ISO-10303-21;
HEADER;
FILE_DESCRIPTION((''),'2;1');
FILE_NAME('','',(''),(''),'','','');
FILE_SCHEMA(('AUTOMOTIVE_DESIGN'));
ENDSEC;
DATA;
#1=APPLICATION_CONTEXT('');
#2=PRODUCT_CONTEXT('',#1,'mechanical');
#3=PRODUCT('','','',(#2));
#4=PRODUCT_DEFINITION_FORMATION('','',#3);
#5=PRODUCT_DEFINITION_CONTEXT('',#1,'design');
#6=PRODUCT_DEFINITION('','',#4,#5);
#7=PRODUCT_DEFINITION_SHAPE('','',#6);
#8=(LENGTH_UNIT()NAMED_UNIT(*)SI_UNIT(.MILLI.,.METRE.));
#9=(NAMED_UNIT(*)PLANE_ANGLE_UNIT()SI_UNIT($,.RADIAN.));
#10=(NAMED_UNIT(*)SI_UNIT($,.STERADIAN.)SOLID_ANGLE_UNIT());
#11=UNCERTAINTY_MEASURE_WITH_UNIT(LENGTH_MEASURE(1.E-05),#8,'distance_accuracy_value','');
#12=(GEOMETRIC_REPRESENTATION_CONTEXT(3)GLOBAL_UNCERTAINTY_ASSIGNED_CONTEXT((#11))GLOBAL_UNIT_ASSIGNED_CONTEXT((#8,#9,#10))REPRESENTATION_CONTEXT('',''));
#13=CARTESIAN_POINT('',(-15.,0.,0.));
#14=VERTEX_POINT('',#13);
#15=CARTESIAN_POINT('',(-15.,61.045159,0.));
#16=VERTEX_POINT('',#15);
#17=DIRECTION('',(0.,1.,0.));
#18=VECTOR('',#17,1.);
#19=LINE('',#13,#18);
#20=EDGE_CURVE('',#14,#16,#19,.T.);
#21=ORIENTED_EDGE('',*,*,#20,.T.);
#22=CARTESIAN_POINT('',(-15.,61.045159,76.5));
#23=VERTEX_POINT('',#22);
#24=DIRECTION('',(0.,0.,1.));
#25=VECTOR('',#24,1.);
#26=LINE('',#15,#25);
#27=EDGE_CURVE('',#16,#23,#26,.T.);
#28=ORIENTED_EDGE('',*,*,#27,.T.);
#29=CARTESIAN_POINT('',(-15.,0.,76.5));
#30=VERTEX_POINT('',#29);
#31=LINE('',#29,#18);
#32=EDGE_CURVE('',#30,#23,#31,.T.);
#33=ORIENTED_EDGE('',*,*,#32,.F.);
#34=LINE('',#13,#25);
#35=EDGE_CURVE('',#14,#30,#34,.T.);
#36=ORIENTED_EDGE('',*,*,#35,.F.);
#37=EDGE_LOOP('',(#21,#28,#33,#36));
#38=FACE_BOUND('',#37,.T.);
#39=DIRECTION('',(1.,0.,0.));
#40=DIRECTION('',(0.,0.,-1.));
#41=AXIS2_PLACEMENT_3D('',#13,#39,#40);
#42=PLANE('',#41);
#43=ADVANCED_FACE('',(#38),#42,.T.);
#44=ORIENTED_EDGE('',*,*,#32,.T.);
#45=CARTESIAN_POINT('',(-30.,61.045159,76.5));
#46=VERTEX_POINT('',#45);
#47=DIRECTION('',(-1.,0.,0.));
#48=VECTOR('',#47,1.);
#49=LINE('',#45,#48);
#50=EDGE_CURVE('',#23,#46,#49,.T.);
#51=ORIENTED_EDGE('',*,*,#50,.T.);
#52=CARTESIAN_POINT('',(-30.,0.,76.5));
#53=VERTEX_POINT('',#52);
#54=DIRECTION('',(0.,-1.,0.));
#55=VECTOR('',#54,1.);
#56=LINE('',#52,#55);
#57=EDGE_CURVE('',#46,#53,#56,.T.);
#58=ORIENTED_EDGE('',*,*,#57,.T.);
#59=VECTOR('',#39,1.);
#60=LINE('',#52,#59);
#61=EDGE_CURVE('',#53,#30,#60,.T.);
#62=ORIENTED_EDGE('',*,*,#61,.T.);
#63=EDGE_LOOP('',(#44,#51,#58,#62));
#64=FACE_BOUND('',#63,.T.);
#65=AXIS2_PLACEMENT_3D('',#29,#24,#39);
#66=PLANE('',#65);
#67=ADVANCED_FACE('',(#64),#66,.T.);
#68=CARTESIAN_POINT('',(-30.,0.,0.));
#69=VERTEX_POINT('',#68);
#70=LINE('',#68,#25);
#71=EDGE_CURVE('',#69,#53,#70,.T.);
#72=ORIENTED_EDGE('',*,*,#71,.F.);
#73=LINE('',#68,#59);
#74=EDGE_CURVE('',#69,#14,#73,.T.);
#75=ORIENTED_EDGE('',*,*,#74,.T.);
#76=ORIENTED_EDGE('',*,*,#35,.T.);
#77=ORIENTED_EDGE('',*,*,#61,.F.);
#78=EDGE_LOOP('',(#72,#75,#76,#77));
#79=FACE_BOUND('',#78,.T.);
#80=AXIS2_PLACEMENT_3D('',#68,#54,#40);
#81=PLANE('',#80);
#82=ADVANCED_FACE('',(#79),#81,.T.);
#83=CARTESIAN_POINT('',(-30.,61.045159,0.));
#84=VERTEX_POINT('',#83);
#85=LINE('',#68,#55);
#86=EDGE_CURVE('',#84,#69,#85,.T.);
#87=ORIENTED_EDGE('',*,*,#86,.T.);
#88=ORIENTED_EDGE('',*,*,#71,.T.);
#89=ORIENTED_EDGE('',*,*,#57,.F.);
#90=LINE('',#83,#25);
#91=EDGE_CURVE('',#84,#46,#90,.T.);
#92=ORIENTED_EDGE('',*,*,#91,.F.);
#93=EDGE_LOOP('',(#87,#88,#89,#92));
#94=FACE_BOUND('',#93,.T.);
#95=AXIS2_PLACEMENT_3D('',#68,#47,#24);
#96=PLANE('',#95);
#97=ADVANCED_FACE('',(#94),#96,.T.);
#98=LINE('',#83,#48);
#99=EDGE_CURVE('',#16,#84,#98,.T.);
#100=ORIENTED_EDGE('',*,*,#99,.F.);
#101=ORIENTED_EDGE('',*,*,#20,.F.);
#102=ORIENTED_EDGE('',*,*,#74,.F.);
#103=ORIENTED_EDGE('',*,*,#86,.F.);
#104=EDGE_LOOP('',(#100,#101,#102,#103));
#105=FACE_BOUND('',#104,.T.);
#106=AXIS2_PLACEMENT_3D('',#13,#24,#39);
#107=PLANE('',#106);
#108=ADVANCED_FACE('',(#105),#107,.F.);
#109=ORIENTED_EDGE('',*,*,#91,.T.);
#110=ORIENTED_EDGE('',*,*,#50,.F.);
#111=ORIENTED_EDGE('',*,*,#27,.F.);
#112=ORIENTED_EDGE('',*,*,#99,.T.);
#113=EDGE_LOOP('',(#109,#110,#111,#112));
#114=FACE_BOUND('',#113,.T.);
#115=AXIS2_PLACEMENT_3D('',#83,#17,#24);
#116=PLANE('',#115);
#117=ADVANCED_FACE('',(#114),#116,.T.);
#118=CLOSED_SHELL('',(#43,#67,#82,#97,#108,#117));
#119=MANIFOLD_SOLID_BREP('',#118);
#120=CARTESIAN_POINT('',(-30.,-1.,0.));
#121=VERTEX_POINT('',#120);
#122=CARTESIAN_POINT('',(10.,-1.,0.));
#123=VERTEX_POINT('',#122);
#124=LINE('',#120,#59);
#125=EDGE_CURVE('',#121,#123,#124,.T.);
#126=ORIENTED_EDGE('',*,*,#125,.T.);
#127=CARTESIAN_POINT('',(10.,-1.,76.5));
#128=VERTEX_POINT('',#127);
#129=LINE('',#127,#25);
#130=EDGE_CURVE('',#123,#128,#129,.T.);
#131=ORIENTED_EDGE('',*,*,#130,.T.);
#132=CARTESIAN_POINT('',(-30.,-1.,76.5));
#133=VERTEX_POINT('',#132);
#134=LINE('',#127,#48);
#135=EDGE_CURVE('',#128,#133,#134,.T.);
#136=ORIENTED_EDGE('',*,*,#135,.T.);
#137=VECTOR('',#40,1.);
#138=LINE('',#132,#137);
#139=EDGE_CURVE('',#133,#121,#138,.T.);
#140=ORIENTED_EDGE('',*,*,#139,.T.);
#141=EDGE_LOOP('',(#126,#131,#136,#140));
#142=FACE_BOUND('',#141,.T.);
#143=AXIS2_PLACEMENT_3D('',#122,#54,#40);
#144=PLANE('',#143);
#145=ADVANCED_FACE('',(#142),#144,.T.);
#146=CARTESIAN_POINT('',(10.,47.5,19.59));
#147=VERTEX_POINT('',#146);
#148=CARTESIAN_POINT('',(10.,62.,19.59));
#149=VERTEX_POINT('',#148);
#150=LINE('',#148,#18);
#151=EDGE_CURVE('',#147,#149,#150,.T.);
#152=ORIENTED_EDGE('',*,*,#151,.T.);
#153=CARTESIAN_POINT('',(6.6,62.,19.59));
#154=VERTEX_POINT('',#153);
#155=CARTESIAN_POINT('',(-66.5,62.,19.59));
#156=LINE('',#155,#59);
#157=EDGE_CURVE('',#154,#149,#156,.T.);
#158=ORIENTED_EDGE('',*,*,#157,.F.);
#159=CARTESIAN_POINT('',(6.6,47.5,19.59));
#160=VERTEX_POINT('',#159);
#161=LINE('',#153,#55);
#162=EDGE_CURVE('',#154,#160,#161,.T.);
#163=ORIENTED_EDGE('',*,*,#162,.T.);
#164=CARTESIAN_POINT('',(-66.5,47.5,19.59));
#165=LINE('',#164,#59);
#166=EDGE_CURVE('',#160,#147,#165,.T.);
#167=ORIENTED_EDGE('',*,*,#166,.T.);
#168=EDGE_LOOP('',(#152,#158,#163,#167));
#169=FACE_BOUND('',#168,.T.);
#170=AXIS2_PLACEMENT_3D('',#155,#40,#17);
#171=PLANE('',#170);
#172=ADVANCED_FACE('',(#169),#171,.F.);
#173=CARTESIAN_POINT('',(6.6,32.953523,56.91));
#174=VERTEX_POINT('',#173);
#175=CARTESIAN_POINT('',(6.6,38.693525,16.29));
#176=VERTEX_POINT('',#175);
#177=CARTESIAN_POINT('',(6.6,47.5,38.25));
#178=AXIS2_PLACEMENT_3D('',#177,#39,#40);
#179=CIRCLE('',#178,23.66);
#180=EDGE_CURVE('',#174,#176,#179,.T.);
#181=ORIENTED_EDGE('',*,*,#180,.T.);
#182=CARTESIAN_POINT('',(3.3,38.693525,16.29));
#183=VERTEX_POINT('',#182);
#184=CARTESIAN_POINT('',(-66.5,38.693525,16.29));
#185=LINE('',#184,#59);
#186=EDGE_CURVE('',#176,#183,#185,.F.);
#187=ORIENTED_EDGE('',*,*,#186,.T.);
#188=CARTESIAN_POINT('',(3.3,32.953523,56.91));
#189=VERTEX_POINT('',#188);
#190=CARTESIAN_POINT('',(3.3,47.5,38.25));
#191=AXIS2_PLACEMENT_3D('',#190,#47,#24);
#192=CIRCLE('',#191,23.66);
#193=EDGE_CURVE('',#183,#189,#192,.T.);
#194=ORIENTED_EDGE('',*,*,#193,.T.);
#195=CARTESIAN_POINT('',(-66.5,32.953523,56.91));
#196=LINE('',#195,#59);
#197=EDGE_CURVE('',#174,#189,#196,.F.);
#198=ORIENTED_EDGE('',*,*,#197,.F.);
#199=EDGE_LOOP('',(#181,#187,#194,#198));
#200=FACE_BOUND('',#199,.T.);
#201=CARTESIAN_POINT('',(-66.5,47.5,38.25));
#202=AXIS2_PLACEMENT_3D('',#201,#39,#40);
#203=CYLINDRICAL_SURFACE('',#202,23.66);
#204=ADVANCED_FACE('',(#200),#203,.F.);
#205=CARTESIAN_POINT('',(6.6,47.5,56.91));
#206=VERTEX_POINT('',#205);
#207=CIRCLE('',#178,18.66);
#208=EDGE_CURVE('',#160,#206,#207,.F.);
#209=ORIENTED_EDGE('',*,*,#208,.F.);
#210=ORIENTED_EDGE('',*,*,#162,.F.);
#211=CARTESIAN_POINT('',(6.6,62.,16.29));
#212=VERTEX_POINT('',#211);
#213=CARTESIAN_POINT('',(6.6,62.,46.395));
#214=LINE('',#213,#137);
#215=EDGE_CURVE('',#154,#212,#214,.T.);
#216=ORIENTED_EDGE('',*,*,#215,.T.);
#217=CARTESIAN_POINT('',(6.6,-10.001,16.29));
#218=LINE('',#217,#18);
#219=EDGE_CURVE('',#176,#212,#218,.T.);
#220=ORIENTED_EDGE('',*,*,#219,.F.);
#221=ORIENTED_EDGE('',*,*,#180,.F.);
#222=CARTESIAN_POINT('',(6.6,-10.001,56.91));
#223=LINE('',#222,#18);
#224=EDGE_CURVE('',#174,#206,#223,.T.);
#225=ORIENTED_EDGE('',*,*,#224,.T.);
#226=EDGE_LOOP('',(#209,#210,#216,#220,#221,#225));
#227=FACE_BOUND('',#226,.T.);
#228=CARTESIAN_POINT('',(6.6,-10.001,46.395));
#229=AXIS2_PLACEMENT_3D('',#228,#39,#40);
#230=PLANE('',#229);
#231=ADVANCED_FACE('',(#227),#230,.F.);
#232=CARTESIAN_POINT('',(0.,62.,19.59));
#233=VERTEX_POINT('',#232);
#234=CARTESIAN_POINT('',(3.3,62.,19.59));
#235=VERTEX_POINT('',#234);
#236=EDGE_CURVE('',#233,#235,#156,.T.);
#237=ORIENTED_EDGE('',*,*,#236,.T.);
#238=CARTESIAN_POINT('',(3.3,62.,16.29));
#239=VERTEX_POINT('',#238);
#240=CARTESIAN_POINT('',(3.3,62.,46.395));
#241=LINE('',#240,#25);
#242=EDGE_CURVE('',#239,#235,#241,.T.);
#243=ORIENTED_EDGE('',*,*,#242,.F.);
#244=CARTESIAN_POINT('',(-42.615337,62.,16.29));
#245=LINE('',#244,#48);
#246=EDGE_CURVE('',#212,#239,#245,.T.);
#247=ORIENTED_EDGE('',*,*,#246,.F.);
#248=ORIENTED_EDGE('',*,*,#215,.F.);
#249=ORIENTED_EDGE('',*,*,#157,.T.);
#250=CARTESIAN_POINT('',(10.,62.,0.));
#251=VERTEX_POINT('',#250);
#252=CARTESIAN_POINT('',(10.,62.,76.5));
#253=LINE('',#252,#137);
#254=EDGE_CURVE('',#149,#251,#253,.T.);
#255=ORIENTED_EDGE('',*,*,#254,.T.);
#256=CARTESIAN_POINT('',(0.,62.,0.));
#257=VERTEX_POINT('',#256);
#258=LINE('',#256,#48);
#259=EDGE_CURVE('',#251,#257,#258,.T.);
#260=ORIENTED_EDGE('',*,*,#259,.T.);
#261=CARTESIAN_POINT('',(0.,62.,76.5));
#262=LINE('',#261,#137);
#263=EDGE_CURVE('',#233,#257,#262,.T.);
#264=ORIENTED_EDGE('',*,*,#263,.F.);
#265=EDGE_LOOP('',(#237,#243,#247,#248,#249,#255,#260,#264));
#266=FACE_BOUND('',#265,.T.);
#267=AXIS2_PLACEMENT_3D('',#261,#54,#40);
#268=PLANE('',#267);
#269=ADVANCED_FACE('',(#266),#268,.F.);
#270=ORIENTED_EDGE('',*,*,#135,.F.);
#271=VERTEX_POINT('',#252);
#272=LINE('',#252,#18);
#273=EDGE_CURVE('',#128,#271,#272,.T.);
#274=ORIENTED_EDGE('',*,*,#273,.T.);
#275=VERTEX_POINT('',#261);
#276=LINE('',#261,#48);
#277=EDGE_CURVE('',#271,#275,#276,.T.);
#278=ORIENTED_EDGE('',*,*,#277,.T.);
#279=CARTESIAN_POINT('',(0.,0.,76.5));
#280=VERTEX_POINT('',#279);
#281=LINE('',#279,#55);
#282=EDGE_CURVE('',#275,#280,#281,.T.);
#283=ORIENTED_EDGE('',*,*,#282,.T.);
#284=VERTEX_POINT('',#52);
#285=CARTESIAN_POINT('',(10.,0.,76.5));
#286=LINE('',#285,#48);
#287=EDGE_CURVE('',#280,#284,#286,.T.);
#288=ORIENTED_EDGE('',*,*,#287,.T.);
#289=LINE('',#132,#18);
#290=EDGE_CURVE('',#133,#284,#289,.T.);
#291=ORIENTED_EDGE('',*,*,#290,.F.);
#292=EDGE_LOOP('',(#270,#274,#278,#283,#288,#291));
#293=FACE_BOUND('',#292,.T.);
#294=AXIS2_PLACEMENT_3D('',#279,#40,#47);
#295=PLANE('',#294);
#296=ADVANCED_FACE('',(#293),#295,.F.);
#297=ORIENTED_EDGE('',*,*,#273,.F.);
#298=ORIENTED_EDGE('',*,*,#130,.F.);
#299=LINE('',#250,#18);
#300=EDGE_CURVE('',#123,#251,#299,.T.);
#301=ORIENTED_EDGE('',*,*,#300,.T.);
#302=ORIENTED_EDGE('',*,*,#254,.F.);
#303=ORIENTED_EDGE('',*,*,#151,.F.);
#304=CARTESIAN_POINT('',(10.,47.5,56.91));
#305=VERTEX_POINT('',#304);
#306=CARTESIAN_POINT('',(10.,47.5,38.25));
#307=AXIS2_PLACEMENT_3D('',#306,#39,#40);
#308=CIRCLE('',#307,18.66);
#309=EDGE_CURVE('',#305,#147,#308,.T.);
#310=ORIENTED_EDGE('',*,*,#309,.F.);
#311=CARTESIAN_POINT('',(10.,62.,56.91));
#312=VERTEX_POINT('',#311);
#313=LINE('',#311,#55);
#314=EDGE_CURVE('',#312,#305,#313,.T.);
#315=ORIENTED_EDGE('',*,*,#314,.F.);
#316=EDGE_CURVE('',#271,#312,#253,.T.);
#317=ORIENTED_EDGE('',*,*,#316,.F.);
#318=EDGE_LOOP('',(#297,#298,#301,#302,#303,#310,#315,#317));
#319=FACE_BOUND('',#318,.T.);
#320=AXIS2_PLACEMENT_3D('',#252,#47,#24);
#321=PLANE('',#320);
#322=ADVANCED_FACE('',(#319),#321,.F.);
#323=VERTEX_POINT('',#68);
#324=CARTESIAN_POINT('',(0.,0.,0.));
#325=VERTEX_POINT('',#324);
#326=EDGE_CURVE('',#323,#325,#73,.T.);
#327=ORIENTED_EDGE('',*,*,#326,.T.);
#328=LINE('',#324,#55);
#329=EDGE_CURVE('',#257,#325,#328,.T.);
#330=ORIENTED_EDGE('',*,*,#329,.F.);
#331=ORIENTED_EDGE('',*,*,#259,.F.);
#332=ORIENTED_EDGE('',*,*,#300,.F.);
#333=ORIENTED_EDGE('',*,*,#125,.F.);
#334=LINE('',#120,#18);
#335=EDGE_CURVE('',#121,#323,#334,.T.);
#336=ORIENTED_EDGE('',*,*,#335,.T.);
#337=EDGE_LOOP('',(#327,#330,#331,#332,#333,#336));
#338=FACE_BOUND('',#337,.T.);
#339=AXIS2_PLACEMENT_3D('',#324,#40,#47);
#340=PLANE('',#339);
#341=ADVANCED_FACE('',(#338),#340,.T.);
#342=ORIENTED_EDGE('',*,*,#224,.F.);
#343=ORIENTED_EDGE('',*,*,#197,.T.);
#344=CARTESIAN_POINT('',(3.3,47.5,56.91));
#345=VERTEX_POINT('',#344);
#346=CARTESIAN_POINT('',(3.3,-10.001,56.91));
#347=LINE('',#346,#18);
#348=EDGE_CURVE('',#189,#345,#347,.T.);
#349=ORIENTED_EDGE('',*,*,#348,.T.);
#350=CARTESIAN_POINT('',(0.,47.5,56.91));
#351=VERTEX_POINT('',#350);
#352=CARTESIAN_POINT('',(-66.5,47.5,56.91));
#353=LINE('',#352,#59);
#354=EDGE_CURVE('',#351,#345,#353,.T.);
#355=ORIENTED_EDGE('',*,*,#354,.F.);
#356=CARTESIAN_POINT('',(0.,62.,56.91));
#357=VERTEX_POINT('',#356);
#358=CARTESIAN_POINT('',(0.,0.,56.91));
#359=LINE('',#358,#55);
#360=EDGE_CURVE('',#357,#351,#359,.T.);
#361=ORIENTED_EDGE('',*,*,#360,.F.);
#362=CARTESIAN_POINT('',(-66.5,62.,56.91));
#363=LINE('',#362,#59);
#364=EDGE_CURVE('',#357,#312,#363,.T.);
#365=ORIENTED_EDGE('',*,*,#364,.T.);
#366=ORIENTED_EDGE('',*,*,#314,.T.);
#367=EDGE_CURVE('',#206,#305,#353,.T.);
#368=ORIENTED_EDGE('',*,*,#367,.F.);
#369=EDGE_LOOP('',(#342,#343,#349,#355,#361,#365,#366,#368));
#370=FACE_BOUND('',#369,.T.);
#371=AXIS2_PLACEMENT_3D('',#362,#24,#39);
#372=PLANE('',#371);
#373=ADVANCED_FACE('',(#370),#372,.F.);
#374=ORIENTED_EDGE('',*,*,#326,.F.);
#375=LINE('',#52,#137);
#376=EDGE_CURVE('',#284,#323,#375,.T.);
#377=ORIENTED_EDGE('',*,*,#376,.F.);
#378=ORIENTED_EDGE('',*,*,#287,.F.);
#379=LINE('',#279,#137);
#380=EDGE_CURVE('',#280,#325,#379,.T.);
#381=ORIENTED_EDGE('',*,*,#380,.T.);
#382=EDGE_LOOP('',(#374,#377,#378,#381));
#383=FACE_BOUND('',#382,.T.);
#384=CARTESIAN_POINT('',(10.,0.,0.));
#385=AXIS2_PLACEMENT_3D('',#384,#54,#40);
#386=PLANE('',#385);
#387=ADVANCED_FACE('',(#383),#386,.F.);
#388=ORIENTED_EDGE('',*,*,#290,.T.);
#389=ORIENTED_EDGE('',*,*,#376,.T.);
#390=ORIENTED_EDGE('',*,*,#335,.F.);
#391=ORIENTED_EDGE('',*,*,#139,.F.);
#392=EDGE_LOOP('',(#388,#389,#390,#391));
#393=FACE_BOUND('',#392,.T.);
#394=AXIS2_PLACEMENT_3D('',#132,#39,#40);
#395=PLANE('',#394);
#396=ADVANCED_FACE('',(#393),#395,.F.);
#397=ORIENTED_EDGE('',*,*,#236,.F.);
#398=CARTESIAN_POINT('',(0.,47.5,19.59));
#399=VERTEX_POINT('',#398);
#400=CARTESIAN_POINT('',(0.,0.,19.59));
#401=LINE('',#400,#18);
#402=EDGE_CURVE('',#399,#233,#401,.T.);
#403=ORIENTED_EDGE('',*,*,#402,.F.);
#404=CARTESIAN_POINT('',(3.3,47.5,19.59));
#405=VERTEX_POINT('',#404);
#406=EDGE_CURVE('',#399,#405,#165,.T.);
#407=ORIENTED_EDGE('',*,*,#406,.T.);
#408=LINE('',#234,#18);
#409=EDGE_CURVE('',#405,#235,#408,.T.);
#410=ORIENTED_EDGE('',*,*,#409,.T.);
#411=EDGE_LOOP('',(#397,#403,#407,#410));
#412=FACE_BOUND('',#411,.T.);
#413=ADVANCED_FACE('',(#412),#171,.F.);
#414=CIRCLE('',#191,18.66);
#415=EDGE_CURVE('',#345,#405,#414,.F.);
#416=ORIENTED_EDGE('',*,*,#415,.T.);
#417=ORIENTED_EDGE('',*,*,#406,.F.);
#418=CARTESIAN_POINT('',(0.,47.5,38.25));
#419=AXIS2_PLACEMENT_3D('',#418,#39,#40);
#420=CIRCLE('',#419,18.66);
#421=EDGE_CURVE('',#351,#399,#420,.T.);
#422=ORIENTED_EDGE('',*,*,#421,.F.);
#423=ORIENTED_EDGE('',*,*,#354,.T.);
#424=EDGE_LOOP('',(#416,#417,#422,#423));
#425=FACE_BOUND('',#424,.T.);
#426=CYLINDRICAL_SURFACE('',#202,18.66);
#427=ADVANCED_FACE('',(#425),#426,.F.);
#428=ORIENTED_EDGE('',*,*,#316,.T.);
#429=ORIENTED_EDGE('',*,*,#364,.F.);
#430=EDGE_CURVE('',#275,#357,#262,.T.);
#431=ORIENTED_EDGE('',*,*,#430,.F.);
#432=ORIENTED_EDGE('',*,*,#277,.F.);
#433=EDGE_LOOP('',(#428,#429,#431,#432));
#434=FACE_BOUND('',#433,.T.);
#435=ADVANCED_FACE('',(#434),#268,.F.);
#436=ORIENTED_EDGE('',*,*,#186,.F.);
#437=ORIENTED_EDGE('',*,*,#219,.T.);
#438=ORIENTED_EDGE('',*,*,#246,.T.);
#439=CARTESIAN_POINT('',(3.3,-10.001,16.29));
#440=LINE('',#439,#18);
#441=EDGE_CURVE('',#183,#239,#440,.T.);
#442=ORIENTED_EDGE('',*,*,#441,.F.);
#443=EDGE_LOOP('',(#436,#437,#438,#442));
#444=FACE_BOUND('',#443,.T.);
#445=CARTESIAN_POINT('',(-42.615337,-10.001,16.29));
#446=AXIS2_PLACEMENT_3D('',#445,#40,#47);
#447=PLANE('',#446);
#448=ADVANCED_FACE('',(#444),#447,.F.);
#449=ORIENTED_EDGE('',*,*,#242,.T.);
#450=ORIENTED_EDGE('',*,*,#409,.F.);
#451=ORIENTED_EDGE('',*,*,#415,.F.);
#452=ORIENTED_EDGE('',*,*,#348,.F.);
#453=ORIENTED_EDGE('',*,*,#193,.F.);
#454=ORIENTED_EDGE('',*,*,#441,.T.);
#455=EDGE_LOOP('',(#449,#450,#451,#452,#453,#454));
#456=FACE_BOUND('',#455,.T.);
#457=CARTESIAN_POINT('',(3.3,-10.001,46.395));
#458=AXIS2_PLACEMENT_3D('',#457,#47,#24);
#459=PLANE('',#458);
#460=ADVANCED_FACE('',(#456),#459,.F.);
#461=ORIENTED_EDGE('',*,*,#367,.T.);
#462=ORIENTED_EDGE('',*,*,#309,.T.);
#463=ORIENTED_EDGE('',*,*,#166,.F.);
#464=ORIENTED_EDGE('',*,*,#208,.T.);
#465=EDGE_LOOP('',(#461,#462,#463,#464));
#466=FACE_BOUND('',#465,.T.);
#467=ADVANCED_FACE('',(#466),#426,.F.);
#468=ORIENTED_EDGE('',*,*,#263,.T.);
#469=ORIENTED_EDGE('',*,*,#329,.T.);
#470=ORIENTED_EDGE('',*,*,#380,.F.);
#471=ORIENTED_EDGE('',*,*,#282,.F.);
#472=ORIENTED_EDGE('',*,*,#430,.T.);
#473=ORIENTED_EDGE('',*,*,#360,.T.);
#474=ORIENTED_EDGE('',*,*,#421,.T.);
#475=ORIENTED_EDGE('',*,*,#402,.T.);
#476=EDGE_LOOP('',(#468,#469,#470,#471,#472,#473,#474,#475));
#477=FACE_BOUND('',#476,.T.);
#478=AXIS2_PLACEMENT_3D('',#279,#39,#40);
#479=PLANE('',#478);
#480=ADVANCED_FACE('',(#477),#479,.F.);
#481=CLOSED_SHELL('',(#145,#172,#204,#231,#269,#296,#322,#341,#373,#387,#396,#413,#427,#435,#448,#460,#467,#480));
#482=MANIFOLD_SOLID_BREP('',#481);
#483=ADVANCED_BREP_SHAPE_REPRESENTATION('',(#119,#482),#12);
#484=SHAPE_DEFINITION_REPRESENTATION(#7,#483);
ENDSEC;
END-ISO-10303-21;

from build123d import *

# Parameters (mm, degrees)
SKETCH1_W           = 10
SKETCH1_H           = 62
BOSS_EXTRUDE1_DEPTH = 76.5
CUT_EXTRUDE1_DEPTH  = 76.5
CUT_EXTRUDE3_START  = 3.3
CUT_EXTRUDE3_DEPTH  = 3.3
SKETCH4_W           = 40
SKETCH4_H           = 76.5
BOSS_EXTRUDE2_DEPTH = 1
SKETCH5_W           = 15
SKETCH5_H           = 61.045159153
BOSS_EXTRUDE3_DEPTH = 76.5


# Read off the part's stored shape, not the designer's step: Cut-Extrude3
with BuildPart() as part:
    # Sketch1 → Boss-Extrude1 (new body)
    with BuildSketch(Plane.XY):
        with Locations((5, 31)):
            Rectangle(SKETCH1_W, SKETCH1_H)
    extrude(amount=BOSS_EXTRUDE1_DEPTH)

    # Sketch2 → Cut-Extrude1 (cut)
    with BuildSketch(Plane(origin=(10, 0, 0), x_dir=(0, 0, -1), z_dir=(1, 0, 0))):
        with BuildLine():
            Line((-19.59, 62), (-56.91, 62))
            Line((-56.91, 62), (-56.91, 47.5))
            ThreePointArc((-56.91, 47.5), (-38.25, 28.84), (-19.59, 47.5))
            Line((-19.59, 47.5), (-19.59, 62))
        make_face()
    extrude(amount=-CUT_EXTRUDE1_DEPTH, mode=Mode.SUBTRACT)

    # Cut-Extrude3 outline → Cut-Extrude3 (cut)
    with BuildSketch(Plane.YZ.offset(CUT_EXTRUDE3_START)):
        with BuildLine():
            ThreePointArc((47.5, 19.59), (28.84, 38.25), (47.5, 56.91))
            Line((47.5, 56.91), (32.953522763, 56.91))
            ThreePointArc((32.953522763, 56.91), (24.072746784, 34.939500531), (38.693525109, 16.29))
            Line((38.693525109, 16.29), (62, 16.29))
            Line((62, 16.29), (62, 19.59))
            Line((62, 19.59), (47.5, 19.59))
        make_face()
    extrude(amount=CUT_EXTRUDE3_DEPTH, mode=Mode.SUBTRACT)

    # Sketch4 → Boss-Extrude2 (add)
    with BuildSketch(Plane.XZ):
        with Locations((-10, 38.25)):
            Rectangle(SKETCH4_W, SKETCH4_H)
    extrude(amount=BOSS_EXTRUDE2_DEPTH)


with BuildPart() as body_2:
    # Sketch5 → Boss-Extrude3 (new body)
    with BuildSketch(Plane.XY.offset(76.5)):
        with Locations((-22.5, 30.522579577)):
            Rectangle(SKETCH5_W, SKETCH5_H)
    extrude(amount=-BOSS_EXTRUDE3_DEPTH)


solid = Compound([part.part, body_2.part])
